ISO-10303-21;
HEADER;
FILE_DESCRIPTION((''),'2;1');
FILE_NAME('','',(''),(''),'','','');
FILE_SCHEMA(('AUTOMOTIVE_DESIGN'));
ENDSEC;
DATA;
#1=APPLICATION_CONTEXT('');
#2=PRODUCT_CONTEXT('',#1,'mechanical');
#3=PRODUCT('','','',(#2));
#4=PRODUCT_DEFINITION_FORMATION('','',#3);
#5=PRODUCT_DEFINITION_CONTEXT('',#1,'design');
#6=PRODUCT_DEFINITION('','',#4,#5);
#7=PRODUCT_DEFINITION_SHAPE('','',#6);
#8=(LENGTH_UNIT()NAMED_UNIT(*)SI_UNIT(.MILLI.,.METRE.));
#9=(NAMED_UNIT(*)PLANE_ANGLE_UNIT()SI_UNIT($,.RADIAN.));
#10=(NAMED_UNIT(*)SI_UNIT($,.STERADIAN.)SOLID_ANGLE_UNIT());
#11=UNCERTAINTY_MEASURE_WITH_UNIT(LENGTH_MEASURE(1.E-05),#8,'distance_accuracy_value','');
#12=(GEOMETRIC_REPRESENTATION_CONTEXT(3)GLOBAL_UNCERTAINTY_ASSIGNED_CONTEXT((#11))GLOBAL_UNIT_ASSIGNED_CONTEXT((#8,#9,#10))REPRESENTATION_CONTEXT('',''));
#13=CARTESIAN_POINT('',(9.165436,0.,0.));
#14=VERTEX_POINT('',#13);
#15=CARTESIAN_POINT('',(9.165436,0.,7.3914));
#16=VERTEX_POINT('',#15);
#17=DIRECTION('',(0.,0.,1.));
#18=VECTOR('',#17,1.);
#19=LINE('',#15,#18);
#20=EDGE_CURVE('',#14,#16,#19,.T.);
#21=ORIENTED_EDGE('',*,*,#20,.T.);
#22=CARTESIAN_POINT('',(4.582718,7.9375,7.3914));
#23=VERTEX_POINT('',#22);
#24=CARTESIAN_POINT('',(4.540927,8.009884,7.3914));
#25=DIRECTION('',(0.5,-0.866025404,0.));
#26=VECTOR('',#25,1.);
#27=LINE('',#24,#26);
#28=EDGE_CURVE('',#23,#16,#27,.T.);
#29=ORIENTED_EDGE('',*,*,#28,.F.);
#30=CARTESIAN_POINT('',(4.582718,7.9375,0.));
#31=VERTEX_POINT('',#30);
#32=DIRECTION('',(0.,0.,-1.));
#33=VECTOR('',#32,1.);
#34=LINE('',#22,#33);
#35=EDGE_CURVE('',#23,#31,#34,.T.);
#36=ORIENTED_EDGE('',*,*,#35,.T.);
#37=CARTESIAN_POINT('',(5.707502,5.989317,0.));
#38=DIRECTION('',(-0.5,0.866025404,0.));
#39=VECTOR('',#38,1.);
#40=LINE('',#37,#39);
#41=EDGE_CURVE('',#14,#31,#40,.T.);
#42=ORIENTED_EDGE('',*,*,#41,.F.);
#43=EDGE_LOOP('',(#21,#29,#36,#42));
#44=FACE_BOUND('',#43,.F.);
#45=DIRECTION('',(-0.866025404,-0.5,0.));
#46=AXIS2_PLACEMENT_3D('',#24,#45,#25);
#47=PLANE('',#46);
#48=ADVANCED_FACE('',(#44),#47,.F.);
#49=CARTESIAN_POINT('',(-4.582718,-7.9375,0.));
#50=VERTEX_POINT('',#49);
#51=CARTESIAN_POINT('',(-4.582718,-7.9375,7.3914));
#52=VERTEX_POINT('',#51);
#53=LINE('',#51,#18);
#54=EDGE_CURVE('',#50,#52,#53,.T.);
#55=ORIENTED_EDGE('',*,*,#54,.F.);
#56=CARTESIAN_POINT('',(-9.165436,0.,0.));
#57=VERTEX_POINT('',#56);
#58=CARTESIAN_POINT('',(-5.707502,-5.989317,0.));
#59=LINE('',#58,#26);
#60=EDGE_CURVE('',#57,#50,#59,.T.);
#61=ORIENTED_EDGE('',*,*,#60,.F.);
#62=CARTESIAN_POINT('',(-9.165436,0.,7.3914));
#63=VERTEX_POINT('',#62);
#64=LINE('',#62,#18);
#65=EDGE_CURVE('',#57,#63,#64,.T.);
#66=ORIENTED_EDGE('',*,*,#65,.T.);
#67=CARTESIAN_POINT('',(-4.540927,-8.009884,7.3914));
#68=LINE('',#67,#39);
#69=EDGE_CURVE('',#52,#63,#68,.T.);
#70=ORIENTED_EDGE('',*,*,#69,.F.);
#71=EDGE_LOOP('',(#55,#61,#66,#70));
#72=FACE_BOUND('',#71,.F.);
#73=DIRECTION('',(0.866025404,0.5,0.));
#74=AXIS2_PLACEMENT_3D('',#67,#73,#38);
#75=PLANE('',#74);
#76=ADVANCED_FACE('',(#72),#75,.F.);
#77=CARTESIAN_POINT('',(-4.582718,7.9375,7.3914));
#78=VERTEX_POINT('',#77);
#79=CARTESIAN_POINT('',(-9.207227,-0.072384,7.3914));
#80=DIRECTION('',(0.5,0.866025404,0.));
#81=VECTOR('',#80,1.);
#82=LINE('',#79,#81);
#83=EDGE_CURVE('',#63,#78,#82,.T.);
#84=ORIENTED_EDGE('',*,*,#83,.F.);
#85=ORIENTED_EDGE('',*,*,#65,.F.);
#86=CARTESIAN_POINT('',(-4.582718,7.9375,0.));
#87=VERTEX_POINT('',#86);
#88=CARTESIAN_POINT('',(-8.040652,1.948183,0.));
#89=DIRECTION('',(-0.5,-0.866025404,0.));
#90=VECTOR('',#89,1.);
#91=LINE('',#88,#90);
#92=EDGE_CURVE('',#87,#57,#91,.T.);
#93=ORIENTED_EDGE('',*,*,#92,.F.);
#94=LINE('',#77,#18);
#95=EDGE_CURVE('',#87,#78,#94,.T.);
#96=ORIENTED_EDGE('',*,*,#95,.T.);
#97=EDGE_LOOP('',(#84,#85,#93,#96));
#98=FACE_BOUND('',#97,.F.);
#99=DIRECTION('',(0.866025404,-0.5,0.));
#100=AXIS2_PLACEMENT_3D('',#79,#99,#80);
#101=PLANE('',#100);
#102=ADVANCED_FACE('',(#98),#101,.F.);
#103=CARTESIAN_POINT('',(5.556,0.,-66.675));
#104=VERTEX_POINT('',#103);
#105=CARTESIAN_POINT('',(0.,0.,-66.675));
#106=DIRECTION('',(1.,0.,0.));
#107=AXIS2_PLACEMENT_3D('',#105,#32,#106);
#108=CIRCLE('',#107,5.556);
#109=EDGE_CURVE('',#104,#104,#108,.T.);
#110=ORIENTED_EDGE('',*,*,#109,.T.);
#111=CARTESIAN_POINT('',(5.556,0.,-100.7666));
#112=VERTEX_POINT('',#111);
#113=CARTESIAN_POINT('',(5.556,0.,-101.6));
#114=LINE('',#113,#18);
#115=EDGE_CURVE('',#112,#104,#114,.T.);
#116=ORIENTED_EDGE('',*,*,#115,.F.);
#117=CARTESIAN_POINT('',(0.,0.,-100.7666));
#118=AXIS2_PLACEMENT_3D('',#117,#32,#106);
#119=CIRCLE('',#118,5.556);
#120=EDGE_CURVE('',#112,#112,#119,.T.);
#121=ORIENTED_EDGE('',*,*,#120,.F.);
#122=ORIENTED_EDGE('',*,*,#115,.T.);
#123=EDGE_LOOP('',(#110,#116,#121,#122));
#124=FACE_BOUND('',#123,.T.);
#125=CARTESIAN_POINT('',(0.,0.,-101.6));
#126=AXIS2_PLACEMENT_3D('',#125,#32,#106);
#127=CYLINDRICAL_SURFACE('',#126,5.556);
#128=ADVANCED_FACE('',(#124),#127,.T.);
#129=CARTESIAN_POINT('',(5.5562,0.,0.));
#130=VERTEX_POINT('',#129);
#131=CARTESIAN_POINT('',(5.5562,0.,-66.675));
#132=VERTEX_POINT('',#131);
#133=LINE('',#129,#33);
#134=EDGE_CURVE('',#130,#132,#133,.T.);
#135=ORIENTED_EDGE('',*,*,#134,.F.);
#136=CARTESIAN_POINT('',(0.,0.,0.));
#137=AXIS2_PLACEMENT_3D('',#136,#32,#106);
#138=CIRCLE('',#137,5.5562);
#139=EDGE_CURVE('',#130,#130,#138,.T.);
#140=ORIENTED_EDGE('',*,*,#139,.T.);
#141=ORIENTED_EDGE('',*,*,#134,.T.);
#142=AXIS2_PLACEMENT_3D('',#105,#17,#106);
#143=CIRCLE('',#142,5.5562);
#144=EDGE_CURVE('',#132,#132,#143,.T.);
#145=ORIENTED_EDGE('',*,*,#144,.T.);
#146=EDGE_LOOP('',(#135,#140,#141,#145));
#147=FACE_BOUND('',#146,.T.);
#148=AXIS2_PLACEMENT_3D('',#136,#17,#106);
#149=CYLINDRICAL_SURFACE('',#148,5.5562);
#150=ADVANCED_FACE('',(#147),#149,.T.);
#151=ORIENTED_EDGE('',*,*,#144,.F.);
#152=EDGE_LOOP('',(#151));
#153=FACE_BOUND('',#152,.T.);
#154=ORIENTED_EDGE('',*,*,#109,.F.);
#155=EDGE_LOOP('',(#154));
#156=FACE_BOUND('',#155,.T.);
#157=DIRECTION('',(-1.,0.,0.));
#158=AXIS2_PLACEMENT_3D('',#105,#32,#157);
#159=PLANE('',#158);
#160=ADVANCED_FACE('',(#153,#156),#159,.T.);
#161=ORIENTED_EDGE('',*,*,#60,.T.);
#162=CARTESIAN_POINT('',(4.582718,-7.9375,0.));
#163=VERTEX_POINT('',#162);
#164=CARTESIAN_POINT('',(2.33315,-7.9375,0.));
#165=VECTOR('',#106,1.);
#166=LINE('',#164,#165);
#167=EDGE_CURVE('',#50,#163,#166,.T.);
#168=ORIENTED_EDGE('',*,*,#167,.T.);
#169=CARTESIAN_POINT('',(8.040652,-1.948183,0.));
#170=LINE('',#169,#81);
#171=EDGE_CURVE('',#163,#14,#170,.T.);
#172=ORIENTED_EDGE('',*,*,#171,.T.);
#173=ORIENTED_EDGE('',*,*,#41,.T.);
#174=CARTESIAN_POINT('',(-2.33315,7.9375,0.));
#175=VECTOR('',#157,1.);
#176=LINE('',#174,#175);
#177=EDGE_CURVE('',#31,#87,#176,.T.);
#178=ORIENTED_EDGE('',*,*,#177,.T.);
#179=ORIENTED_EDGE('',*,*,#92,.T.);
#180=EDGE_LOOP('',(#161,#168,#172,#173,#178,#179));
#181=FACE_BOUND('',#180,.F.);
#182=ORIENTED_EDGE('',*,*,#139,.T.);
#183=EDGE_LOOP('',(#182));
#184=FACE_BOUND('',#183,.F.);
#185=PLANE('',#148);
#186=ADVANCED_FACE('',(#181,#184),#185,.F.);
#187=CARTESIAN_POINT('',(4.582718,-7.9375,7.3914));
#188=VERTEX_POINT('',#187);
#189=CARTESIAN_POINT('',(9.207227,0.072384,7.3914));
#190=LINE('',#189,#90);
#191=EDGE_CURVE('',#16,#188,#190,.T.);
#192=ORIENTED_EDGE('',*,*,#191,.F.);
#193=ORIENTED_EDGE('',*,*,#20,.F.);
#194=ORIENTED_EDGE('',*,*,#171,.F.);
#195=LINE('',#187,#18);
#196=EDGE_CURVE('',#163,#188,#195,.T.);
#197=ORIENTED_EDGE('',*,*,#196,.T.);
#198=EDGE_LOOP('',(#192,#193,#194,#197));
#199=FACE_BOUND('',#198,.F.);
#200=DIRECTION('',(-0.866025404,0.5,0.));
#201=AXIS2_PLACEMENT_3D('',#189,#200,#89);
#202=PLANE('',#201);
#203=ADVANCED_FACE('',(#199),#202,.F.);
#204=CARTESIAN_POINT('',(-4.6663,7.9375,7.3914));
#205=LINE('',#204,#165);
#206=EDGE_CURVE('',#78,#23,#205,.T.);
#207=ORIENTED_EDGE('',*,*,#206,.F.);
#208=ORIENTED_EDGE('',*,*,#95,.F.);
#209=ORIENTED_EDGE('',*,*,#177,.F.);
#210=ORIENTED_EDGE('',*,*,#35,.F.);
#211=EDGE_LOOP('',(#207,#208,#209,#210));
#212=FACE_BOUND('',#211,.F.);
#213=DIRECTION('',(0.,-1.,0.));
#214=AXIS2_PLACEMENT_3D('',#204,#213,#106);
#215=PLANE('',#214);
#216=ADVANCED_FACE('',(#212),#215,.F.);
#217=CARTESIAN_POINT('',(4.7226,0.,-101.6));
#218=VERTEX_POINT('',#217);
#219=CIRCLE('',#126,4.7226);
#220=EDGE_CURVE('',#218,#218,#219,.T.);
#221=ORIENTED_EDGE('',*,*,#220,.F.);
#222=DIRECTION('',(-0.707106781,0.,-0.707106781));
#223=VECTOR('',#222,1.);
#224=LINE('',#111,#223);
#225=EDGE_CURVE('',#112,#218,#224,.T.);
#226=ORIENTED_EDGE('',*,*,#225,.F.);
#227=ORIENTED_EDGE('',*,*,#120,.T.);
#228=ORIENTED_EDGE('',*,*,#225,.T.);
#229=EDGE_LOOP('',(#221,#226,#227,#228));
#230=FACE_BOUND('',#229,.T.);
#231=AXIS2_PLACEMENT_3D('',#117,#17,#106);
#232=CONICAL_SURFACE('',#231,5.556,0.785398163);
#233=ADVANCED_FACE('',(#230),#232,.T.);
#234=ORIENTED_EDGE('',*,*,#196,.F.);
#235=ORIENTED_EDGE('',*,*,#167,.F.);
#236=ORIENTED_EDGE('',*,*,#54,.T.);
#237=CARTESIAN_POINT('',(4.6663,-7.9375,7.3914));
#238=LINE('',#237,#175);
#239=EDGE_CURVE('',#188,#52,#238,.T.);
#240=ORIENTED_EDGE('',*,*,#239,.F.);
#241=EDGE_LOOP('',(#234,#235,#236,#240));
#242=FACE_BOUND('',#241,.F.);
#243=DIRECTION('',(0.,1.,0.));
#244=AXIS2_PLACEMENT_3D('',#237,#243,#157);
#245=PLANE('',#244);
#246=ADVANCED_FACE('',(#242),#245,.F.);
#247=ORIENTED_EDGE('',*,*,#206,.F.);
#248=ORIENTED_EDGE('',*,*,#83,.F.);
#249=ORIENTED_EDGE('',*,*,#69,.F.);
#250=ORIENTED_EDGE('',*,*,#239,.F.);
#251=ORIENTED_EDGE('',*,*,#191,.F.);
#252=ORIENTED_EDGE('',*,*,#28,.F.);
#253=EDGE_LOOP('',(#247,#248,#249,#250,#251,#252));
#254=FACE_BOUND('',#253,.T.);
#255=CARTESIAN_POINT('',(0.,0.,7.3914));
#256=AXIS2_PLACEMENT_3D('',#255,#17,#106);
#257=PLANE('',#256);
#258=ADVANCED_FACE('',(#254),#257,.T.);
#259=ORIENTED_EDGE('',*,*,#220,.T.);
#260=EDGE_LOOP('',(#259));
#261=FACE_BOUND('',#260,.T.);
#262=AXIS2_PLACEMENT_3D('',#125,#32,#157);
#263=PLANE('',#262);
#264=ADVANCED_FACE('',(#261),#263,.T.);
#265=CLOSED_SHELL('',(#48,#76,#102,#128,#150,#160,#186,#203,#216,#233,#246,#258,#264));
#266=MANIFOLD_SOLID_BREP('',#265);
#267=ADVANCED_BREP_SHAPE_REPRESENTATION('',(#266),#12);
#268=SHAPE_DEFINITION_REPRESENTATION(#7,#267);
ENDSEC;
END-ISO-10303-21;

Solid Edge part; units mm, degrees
sketch "Sketch1" plane through (0, 0, 0) normal (0, 0, 1) x (1, 0, 0)
  circle A0 centre (0, 0) radius 9.2075
  dimension "D1" = 18.415
extrude "Protrusion1" add sketch "Sketch1" along normal blind 7.3914
sketch "Sketch2" plane through (0, 0, 0) normal (0, 0, -1) x (1, 0, 0)
  circle A0 centre (0, 0) radius 5.5562
extrude "Protrusion2" add sketch "Sketch2" along normal blind 101.6
sketch "Sketch3" plane through (0, 0, -101.6) normal (0, 0, -1) x (1, 0, 0)
  circle A0 centre (0, 0) radius 5.556
extrude "Cutout1" cut sketch "Sketch3" against normal blind 34.925 flip side to cut
chamfer "Chamfer_1" distance 0.8334 angle 45 1 edges at (-5.556, 0, -101.6)
sketch "Sketch4" plane through (0, 0, 7.3914) normal (0, 0, 1) x (1, 0, 0)
  line L0 (-4.6663, 7.9375) -> (4.6663, 7.9375)
  dimension "D1" = 15.875
extrude "Cutout2" cut sketch "Sketch4" against normal up to next material side at (0, 7.9875, 7.3914)
pattern_circular "Pattern1" count 6 over 360 about axis through (0, 0, 7.3914) along (0, 0, 1) of "Cutout2"
properties part number "139511"
